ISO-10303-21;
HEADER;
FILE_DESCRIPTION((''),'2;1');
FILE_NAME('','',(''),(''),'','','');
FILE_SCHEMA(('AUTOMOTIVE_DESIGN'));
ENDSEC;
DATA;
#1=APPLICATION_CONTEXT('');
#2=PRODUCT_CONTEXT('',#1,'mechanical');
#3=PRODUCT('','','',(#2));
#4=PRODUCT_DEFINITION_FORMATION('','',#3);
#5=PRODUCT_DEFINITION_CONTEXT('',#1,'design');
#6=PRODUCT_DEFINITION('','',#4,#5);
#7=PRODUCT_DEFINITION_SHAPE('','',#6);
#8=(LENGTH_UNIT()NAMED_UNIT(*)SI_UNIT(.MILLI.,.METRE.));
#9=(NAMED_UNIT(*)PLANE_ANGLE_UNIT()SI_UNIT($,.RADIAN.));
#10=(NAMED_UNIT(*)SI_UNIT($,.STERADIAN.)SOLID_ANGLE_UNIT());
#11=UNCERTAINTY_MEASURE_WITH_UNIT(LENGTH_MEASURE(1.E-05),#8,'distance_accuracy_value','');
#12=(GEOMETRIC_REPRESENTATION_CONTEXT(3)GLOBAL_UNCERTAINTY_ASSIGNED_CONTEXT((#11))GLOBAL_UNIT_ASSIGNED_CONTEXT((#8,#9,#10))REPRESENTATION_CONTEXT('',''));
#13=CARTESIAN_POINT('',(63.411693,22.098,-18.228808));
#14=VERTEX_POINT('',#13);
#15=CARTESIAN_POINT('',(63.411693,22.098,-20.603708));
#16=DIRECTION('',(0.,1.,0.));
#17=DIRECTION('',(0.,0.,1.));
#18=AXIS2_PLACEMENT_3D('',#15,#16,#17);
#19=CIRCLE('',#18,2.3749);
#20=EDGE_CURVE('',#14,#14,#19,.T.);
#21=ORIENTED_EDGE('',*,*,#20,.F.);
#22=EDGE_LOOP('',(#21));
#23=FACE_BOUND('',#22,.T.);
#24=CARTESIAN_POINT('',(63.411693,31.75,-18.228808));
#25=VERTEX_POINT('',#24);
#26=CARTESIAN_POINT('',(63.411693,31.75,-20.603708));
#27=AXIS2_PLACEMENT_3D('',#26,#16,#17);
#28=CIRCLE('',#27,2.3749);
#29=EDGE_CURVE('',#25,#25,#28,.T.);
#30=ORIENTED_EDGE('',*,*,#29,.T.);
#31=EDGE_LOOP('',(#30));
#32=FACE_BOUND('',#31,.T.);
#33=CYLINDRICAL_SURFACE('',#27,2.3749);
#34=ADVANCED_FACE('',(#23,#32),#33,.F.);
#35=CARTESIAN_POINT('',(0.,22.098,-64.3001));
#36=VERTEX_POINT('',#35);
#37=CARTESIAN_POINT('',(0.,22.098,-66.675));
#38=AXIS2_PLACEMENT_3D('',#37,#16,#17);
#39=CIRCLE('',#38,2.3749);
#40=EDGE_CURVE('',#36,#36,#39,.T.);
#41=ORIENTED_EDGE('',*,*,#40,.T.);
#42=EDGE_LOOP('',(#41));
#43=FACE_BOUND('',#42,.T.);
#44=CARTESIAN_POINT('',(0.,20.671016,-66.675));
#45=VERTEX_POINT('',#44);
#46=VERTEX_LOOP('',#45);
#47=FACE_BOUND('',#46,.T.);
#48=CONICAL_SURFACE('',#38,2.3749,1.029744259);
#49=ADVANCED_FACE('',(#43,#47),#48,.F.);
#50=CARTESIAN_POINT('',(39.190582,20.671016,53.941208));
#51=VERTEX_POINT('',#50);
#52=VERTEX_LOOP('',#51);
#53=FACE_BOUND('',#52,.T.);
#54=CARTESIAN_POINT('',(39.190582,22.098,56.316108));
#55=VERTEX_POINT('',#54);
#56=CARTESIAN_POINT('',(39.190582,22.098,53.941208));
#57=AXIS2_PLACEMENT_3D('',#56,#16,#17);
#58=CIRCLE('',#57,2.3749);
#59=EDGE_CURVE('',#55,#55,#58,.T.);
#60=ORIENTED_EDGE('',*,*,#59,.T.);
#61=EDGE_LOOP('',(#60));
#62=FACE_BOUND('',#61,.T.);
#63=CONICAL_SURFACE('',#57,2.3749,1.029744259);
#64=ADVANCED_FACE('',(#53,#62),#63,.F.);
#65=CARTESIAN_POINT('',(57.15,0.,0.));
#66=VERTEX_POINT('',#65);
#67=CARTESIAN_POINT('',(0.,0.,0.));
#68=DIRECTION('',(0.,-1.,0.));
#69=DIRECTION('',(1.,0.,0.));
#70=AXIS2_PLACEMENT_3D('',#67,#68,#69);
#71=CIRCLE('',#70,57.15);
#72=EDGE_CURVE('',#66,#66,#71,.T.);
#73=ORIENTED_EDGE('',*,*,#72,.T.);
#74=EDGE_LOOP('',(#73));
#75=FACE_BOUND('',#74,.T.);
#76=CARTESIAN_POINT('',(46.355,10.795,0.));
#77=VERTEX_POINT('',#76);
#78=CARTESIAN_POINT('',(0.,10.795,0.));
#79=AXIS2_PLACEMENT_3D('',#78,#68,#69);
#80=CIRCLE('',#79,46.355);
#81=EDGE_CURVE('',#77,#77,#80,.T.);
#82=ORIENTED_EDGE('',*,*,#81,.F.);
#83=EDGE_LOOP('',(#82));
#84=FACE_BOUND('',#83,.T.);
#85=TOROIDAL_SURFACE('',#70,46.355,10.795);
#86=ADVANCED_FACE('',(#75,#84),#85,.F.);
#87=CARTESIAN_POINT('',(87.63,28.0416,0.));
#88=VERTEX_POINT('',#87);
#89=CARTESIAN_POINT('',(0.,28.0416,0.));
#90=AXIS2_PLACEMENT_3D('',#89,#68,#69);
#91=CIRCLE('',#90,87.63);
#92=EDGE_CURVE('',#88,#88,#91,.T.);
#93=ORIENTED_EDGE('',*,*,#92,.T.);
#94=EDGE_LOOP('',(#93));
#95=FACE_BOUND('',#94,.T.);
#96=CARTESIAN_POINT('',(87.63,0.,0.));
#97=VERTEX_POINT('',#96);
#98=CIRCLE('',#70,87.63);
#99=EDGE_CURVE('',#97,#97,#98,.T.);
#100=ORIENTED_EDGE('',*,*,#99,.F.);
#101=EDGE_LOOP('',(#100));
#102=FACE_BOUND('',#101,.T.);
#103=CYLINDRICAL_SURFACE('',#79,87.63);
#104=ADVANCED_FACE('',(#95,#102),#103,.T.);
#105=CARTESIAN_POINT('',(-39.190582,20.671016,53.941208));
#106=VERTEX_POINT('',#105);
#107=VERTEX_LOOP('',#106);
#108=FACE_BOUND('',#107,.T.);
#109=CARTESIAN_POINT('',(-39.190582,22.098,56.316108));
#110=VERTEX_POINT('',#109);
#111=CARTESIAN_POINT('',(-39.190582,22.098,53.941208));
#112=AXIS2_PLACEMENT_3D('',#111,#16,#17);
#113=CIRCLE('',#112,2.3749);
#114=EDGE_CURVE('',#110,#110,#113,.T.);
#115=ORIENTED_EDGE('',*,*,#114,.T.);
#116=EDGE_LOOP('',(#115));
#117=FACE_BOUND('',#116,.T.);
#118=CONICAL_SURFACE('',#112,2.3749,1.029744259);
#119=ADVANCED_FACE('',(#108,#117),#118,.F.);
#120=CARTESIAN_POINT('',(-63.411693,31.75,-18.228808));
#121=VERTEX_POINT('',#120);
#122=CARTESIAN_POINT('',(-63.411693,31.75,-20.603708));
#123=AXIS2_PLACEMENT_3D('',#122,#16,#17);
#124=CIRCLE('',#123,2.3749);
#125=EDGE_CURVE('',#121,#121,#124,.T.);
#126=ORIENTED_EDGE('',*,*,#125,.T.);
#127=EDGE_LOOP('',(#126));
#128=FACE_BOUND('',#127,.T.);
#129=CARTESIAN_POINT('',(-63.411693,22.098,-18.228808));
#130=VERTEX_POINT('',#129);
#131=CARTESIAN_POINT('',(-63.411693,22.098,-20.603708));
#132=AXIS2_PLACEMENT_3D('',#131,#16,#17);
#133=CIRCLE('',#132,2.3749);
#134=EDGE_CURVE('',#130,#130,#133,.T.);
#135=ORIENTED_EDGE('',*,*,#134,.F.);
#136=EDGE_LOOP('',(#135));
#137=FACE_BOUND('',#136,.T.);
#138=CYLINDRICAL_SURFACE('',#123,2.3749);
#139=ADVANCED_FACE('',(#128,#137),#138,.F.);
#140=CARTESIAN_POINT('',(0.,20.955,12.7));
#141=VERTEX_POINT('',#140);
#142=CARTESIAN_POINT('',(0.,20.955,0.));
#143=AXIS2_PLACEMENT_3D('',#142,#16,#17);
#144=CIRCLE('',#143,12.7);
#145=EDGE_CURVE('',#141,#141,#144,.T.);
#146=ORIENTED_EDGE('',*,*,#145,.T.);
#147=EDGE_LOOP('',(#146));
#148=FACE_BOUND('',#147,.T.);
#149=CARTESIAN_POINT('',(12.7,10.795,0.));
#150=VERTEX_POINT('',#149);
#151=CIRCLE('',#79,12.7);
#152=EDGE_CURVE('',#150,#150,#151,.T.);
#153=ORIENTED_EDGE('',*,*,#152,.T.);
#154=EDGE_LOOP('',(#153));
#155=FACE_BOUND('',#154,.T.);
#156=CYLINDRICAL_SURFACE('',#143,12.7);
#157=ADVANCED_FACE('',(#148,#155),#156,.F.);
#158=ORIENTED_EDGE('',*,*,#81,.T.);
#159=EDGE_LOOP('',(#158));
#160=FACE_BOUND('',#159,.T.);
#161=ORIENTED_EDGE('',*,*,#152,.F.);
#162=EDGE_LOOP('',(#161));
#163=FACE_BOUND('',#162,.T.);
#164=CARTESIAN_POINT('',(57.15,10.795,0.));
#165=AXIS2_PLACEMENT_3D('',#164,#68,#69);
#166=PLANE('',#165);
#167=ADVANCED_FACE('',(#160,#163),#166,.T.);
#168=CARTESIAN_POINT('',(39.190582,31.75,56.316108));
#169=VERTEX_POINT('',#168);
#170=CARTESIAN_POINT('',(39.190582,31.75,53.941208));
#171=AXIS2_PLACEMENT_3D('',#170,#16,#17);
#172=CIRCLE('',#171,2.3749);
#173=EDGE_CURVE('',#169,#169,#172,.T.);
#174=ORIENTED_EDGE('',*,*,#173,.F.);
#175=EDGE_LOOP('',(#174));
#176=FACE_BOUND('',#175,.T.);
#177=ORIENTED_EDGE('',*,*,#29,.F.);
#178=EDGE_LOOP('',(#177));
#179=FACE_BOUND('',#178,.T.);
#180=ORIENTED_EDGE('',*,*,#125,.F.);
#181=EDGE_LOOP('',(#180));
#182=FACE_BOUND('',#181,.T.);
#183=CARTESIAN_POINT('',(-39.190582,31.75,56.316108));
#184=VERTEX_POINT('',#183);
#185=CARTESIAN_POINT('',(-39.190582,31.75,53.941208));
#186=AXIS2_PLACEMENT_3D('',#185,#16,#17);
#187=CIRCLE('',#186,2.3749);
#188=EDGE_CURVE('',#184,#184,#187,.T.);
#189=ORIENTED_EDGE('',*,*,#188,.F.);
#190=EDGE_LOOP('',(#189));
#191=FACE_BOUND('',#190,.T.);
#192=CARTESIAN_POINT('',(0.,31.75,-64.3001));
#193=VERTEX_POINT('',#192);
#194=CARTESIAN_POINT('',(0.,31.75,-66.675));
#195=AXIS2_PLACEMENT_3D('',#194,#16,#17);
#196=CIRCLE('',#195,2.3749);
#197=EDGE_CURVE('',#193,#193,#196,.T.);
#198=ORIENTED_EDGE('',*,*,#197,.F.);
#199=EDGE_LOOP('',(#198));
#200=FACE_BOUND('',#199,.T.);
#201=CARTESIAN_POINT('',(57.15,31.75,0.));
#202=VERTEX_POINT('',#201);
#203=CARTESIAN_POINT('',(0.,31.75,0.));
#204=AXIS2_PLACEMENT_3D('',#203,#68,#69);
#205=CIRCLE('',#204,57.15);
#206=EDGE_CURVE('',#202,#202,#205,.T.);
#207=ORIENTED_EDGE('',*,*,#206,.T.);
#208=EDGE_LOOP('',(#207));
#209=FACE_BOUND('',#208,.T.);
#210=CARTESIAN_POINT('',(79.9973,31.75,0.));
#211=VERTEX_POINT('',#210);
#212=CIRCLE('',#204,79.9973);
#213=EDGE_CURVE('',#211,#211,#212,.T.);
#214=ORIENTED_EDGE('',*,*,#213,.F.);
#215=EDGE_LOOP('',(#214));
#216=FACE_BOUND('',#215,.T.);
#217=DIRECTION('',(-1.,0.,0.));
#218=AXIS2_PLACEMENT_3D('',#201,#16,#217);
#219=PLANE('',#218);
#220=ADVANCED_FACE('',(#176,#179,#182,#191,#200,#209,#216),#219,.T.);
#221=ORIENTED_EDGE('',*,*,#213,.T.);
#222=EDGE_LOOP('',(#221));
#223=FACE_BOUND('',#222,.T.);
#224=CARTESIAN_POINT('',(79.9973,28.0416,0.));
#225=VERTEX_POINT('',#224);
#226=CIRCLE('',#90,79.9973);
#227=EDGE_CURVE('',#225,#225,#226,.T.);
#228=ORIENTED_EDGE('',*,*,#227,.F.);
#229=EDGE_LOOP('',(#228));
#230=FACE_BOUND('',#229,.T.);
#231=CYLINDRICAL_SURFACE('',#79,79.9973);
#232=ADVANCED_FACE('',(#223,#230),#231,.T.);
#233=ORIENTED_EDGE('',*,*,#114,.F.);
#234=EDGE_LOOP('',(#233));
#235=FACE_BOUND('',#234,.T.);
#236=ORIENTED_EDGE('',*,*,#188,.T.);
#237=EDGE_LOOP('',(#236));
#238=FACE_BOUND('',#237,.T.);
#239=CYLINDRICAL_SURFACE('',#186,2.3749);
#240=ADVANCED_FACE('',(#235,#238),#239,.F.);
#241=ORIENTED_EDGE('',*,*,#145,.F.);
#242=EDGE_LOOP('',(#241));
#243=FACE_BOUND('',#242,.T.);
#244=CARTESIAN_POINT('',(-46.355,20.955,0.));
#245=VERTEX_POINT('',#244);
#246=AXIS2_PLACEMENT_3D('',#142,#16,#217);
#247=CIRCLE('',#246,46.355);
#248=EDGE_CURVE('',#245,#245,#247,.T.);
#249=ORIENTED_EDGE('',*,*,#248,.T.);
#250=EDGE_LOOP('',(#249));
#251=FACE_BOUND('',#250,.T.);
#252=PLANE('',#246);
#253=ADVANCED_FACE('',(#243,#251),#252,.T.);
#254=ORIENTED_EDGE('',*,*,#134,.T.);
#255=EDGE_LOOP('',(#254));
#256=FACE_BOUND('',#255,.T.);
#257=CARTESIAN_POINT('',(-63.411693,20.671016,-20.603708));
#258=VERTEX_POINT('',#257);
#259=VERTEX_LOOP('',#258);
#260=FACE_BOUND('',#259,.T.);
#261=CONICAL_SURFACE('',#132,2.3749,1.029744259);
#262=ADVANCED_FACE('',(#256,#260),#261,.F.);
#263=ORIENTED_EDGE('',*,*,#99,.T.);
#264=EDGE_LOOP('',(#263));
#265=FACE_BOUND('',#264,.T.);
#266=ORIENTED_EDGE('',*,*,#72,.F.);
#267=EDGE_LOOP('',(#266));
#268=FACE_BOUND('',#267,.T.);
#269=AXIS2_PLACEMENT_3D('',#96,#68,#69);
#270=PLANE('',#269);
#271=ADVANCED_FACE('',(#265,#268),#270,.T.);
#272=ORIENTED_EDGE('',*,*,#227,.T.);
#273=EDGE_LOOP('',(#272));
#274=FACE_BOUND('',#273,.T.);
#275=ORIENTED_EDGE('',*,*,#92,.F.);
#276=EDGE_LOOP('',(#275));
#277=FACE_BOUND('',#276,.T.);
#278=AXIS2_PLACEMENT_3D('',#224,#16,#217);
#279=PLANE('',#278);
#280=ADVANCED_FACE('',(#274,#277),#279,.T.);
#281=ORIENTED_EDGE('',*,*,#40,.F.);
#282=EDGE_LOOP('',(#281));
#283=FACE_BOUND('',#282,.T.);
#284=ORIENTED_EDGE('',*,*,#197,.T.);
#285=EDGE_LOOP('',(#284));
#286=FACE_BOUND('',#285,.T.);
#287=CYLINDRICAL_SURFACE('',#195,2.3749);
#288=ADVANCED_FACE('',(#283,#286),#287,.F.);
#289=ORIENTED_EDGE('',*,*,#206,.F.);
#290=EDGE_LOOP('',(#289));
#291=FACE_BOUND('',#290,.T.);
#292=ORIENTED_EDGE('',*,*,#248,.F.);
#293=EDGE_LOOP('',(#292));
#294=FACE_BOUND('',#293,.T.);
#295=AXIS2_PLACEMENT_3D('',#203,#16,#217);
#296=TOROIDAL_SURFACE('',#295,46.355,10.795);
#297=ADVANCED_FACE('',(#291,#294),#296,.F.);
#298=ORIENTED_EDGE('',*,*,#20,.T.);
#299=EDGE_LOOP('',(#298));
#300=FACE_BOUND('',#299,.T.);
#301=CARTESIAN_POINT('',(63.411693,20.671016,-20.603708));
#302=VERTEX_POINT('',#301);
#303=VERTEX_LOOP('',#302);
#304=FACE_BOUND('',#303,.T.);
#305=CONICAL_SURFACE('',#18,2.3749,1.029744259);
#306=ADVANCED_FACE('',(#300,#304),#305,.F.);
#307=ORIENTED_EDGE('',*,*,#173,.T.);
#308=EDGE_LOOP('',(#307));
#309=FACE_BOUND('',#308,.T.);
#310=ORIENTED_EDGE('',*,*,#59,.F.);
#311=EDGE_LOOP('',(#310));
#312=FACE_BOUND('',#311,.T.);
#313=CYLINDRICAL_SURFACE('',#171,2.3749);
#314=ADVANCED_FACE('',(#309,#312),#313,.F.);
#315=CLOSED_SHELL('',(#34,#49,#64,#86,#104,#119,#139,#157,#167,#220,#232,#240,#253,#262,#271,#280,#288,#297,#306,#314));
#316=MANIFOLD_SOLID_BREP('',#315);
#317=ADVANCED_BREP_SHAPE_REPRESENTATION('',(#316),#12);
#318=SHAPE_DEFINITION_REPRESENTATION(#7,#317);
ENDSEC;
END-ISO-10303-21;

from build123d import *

# Parameters (mm, degrees)
F_1_1_DIAMETER_HOLE1_D = 25.4
CIRPATTERN1_COUNT      = 5
FILLET2_R              = 10.795


with BuildPart() as part:
    # Sketch1 → Revolve1 (revolve)
    with BuildSketch(Plane.XY):
        Polygon((87.63, 0), (57.15, 0), (57.15, 10.795), (0, 10.795), (0, 20.955), (57.15, 20.955), (57.15, 31.75), (79.9973, 31.75), (79.9973, 28.0416), (87.63, 28.0416), align=None)
    revolve(axis=Axis((0, 10.795, 0), (0, 1, 0)))

    # 1 (1) Diameter Hole1 (through all)
    with Locations(Plane(origin=(0, 20.955, 0), x_dir=(1, 0, 0), z_dir=(0, 1, 0))):
        with Locations((0, 0)):
            Hole(F_1_1_DIAMETER_HOLE1_D / 2)

    # Sketch7 → 3/16 (0.187) Dowel Hole1 (revolve, cut)
    with BuildSketch(Plane(origin=(0, 31.75, -66.675), x_dir=(0, 0, 1), z_dir=(1, 0, 0))):
        Polygon((0, 0), (0, 11.078983884), (2.3749, 9.652), (2.3749, 0), align=None)
    f_3_16_0_187_dowel_hole1 = revolve(axis=Axis((0, 38.1, -66.675), (0, -1, 0)), mode=Mode.SUBTRACT)

    # CirPattern1: 3/16 (0.187) Dowel Hole1 ×5 about axis
    cirpattern1_axis = Axis((0, 0, 0), (0, 1, 0))
    for i in range(1, CIRPATTERN1_COUNT):
        add(f_3_16_0_187_dowel_hole1.rotate(cirpattern1_axis, i * 360 / CIRPATTERN1_COUNT), mode=Mode.SUBTRACT)

    # Fillet2
    fillet2_edges = [part.edges().sort_by_distance(p)[0] for p in [
        (-57.15, 10.795, 0),
        (-57.15, 20.955, 0),
    ]]
    fillet(fillet2_edges, radius=FILLET2_R - 0.0001)  # a hair under: the kernel refuses the full size


solid = part.part
